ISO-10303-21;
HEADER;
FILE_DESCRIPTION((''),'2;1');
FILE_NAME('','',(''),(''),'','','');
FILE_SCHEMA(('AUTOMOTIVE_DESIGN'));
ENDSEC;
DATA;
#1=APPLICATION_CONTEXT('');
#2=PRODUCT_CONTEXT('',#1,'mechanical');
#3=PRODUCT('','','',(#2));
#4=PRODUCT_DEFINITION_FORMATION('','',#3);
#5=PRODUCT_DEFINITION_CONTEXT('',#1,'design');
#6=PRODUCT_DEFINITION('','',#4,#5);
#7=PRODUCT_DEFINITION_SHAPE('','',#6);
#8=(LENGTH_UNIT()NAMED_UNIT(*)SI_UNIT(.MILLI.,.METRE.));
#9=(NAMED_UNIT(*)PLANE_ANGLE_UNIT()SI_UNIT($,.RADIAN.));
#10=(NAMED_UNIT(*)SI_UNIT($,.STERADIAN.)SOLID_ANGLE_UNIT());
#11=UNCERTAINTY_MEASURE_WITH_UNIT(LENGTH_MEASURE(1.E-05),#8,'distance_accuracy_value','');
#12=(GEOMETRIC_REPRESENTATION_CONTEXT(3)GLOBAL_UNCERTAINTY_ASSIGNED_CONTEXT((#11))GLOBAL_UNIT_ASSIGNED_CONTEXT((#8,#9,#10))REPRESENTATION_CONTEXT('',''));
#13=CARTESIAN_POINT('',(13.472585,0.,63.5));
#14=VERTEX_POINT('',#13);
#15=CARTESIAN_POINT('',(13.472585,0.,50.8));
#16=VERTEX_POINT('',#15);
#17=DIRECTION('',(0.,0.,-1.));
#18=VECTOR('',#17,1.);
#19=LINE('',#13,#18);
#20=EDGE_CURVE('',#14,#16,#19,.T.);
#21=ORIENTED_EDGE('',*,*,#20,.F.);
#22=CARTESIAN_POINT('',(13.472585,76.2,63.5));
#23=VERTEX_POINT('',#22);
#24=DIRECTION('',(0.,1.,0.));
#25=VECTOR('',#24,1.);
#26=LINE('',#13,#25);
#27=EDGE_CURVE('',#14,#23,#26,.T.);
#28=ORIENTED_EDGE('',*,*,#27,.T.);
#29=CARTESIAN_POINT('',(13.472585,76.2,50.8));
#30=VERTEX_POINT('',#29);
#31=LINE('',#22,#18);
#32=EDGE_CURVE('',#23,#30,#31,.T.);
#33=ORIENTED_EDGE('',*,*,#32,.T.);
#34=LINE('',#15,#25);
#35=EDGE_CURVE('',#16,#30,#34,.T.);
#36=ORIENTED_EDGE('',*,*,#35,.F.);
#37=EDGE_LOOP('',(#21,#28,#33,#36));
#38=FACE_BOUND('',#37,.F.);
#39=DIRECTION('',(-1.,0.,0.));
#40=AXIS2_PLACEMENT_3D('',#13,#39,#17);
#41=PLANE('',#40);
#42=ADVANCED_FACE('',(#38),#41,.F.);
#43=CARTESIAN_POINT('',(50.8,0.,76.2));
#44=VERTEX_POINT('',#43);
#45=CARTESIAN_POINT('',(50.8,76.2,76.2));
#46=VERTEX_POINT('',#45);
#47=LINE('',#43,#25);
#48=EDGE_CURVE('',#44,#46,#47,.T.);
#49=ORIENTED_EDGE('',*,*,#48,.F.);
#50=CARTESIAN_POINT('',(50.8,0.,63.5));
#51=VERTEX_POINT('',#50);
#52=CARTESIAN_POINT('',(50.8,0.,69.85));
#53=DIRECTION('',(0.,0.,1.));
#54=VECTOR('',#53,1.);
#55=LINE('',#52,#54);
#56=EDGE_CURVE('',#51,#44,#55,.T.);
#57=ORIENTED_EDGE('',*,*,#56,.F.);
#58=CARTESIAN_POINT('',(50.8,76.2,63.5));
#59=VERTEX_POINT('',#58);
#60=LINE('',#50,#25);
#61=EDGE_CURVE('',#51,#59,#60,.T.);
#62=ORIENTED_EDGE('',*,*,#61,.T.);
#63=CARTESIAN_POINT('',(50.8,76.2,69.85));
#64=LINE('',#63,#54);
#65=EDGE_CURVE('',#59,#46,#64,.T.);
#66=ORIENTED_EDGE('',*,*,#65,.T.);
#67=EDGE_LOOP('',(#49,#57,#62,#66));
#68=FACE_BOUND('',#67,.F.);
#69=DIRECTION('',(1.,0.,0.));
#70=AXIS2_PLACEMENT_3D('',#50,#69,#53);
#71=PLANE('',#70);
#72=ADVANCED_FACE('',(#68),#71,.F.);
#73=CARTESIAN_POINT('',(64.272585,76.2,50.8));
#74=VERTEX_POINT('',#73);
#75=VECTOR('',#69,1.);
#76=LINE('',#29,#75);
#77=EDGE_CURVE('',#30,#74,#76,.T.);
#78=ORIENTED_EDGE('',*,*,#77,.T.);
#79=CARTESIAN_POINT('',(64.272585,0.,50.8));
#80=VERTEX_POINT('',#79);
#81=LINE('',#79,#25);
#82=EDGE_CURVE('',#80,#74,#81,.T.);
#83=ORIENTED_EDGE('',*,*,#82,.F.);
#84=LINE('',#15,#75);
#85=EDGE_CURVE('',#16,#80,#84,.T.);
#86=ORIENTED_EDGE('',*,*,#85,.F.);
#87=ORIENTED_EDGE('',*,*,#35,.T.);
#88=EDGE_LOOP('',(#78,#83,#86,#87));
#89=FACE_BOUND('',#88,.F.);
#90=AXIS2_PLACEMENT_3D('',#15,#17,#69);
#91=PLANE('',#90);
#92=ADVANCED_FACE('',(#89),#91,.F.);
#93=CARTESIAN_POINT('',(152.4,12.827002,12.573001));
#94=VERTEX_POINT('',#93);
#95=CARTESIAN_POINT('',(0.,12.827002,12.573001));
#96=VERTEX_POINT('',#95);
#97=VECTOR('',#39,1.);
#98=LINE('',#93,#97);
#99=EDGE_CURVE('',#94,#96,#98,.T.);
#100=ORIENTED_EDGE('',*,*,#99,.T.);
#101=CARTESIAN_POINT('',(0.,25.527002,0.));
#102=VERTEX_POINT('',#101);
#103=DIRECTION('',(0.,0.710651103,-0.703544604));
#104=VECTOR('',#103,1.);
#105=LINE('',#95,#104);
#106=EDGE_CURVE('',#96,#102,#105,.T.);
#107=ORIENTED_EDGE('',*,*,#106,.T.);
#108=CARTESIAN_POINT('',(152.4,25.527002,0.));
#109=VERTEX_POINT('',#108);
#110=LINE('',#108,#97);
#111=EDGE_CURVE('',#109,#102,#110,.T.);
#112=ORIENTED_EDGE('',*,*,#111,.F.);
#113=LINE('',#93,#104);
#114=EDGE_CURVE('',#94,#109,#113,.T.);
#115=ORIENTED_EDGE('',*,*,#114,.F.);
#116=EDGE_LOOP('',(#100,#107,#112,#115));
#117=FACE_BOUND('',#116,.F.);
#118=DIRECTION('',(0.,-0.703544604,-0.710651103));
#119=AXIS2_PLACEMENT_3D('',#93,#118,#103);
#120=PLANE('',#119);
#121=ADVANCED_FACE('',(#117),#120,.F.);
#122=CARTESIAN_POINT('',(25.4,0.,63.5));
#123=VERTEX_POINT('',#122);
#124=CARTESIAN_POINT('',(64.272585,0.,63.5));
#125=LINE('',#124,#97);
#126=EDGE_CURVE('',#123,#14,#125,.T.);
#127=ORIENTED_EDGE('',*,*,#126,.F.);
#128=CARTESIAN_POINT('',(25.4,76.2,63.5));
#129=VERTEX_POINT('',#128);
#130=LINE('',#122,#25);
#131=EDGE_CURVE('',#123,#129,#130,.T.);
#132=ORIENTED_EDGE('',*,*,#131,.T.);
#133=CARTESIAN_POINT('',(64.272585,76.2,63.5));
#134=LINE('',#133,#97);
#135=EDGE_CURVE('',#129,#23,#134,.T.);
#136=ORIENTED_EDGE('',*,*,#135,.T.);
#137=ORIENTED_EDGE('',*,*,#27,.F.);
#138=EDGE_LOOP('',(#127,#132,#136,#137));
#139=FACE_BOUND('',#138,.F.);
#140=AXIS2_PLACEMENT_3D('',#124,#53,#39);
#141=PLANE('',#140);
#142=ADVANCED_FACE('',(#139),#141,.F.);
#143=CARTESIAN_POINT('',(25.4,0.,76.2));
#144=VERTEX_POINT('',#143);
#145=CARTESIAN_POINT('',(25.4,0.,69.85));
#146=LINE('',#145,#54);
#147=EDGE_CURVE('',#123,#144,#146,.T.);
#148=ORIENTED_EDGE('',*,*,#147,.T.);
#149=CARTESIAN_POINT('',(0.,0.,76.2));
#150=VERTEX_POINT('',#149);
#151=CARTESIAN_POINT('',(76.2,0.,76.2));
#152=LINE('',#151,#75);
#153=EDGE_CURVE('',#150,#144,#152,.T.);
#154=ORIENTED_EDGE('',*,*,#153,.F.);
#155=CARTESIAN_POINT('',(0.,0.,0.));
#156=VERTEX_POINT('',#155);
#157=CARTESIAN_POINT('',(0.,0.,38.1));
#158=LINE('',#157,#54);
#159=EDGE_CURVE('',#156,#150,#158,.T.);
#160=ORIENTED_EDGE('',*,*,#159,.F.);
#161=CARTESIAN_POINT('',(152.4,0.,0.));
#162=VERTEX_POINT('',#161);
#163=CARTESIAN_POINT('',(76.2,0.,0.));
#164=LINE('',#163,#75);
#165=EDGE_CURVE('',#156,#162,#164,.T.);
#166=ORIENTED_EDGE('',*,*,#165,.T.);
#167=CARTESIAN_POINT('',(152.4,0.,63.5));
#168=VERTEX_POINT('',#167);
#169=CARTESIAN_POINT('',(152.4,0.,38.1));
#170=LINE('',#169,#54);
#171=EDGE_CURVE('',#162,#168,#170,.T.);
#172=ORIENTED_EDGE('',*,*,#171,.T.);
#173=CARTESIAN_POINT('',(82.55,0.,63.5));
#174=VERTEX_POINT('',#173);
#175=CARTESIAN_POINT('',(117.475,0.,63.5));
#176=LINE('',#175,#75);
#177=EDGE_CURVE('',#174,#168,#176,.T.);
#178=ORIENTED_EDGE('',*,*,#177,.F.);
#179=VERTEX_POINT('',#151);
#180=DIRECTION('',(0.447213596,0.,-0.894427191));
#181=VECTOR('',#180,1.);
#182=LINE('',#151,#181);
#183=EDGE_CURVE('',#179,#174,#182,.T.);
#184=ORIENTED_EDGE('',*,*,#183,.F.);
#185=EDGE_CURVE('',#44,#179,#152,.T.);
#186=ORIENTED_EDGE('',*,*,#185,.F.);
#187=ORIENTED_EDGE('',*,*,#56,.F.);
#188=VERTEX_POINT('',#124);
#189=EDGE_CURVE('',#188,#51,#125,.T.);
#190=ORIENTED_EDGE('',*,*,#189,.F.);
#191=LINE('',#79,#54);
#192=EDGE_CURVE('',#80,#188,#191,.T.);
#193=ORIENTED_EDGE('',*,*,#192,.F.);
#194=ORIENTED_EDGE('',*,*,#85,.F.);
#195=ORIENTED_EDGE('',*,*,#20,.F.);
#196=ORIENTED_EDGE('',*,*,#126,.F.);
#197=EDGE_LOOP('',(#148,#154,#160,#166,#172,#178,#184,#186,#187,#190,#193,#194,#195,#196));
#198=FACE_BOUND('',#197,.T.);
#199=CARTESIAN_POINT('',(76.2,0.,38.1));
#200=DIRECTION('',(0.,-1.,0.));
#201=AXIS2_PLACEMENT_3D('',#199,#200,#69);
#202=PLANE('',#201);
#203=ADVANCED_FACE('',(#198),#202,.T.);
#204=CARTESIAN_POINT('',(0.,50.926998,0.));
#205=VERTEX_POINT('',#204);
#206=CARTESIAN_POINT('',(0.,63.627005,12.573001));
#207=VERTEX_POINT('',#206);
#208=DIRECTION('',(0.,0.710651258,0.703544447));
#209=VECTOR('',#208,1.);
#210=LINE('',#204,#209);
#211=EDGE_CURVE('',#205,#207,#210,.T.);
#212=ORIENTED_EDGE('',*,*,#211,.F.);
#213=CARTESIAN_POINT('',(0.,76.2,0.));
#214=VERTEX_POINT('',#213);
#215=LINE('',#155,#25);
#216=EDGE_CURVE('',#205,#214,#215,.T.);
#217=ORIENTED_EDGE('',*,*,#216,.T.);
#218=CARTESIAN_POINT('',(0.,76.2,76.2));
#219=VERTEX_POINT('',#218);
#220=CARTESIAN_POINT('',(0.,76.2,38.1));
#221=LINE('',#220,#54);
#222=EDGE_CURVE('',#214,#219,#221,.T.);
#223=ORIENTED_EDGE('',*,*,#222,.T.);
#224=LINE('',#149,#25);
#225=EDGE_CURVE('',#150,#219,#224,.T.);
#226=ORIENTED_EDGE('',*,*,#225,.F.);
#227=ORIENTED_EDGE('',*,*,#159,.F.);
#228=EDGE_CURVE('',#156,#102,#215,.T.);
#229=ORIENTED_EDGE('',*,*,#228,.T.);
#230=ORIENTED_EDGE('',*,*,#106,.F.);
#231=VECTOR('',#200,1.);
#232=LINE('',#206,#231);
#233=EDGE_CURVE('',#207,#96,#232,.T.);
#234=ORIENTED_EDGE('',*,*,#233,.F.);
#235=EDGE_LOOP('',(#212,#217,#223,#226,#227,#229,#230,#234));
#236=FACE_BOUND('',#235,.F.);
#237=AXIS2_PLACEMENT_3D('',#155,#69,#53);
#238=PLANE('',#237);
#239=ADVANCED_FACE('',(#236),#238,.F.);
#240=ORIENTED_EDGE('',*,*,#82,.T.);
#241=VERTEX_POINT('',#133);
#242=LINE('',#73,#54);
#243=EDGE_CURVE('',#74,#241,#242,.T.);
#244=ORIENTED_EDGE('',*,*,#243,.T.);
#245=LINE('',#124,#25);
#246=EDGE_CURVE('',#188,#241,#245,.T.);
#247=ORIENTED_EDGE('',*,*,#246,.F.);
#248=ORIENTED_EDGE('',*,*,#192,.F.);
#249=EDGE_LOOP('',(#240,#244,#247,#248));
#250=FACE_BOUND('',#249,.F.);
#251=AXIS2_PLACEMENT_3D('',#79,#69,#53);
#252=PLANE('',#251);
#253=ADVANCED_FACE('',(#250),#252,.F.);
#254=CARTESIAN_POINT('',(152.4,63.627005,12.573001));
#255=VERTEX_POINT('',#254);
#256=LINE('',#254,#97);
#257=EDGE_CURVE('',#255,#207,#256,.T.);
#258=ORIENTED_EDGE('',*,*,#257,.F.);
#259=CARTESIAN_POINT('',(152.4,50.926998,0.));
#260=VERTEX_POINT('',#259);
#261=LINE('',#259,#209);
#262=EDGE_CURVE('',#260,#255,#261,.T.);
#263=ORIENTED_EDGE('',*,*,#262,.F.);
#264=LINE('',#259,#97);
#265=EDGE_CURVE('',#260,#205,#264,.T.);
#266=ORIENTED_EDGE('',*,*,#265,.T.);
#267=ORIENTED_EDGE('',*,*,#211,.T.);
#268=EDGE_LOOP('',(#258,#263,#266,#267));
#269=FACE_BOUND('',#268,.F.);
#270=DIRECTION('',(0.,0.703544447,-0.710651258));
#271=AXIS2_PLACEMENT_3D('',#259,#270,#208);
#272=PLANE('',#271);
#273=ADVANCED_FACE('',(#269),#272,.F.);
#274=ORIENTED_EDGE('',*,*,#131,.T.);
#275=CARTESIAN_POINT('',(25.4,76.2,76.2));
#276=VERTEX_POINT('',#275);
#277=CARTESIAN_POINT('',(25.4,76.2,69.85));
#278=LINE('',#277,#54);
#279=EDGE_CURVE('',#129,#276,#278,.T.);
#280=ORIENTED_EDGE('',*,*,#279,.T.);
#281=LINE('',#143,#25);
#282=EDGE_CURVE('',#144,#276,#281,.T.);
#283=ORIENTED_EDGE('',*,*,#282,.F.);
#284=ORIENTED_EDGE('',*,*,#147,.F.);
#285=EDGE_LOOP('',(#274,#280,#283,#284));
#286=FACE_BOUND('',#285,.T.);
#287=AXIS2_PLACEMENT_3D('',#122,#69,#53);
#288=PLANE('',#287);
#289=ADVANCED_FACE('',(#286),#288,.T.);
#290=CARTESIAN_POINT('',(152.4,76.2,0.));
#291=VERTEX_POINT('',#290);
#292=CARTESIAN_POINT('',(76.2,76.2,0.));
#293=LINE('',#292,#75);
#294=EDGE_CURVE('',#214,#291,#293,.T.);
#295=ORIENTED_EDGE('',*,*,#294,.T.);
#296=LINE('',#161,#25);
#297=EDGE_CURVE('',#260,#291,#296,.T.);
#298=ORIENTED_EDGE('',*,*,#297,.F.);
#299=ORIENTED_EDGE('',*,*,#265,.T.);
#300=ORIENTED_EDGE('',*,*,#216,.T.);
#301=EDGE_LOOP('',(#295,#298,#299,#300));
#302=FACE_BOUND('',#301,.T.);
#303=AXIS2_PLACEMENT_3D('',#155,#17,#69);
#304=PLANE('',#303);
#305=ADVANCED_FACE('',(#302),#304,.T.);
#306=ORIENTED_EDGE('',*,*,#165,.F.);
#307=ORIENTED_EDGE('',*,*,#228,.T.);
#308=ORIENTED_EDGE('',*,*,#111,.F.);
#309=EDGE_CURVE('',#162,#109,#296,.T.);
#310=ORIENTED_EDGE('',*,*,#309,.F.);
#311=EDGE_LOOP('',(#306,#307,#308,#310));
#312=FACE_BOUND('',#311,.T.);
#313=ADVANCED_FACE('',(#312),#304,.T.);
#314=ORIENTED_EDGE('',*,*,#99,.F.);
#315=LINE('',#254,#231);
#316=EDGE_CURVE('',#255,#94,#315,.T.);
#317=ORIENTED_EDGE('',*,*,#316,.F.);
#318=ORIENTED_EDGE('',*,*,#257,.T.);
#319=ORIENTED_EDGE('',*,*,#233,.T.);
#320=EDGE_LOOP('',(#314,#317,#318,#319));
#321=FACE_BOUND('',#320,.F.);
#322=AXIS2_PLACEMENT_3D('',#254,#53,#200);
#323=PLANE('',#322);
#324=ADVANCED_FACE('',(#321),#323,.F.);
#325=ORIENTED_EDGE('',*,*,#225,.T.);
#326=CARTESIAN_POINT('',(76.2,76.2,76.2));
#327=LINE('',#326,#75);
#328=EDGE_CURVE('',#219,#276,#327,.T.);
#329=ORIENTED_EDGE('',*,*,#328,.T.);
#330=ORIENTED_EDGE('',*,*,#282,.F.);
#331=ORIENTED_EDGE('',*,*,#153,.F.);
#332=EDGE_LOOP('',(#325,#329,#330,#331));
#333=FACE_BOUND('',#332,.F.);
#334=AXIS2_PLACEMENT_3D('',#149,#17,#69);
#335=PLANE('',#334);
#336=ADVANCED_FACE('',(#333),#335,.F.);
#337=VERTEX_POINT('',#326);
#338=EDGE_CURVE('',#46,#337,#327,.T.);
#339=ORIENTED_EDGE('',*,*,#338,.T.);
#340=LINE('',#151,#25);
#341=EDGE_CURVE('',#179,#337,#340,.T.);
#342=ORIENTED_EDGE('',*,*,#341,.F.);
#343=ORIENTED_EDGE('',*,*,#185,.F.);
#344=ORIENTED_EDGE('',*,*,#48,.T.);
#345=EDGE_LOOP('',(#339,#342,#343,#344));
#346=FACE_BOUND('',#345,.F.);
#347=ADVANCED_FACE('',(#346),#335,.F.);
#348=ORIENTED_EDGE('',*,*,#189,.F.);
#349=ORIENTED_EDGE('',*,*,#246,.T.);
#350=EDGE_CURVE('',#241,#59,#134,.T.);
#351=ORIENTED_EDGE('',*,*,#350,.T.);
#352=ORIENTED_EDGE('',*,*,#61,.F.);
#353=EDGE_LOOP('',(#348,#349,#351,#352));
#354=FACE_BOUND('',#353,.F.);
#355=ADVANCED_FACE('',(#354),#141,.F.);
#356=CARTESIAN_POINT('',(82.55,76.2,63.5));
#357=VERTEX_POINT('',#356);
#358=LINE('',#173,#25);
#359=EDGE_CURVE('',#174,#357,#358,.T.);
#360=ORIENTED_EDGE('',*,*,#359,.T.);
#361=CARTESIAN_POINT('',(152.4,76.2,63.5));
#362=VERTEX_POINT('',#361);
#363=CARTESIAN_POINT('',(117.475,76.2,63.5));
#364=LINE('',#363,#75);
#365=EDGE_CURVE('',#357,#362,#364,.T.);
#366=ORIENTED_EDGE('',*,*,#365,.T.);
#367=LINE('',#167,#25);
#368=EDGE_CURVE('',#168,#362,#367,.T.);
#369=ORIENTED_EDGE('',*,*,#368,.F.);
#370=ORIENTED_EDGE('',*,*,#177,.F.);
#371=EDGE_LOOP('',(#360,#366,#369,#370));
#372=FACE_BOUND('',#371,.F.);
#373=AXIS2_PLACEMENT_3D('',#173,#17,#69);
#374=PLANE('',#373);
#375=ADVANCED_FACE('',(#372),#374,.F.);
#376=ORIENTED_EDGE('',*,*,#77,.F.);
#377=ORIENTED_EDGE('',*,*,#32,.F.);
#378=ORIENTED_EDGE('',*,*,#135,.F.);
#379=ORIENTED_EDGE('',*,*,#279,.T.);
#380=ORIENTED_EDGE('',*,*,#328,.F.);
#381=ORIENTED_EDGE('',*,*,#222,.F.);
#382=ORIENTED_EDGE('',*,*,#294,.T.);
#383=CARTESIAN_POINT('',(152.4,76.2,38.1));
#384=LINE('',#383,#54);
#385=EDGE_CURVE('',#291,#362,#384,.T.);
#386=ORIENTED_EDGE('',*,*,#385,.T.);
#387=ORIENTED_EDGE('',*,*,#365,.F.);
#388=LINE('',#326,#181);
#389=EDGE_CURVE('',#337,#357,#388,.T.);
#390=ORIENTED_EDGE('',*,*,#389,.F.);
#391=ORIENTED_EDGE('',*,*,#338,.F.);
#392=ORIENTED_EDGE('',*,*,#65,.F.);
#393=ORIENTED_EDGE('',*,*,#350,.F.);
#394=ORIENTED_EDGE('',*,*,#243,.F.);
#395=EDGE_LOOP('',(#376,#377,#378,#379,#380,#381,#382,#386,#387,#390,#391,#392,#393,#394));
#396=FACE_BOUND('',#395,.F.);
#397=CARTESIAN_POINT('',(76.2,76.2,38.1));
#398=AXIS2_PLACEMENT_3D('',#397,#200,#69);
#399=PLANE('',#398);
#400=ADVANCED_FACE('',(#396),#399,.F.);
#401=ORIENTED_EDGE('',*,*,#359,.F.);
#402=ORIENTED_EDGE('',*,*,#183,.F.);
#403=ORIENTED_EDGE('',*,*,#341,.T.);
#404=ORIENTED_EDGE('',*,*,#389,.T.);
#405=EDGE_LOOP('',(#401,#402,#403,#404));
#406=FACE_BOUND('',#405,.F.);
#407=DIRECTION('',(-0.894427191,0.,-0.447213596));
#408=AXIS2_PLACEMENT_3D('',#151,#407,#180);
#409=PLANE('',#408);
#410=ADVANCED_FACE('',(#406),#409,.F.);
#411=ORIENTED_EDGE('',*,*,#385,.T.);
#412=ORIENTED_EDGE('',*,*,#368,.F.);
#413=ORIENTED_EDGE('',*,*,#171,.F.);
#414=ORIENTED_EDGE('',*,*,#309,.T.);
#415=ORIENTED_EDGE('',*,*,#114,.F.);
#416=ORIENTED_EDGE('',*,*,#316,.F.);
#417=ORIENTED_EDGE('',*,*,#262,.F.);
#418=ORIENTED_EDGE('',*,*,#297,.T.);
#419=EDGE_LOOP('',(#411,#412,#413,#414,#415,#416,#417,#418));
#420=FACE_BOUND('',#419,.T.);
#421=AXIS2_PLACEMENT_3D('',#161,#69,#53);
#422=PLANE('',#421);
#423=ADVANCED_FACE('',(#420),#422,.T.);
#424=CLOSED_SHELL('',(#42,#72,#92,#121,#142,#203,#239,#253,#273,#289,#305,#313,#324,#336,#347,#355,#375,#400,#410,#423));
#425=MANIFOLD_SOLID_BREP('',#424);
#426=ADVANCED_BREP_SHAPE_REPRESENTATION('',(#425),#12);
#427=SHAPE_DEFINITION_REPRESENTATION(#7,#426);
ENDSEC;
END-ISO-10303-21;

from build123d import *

# Parameters (mm, degrees)
F0_W      = 152.4
F0_H      = 76.2
F1_DEPTH  = 76.2
F3_DEPTH  = 152.4
F4_W      = 69.85
F4_H      = 12.7
F5_DEPTH  = 76.2
F7_DEPTH  = 76.2
F8_W      = 25.4
F8_H      = 12.7
F9_DEPTH  = 76.2
F11_DEPTH = 76.2


# Not quite as in the source:
# - a feature names something its author has since deleted; it is built from what else it names


with BuildPart() as f1:
    # F0 (on Front) → F1 (new body)
    with BuildSketch(Plane.XZ):
        with Locations((76.2, 38.1)):
            Rectangle(F0_W, F0_H)
    extrude(amount=-F1_DEPTH)

    # F2 (on face) → F3 (cut)
    with BuildSketch(Plane.YZ.offset(152.4)):
        Polygon((25.5270022899, 0), (38.1, 0), (50.9269982576, 0), (63.6270046234, 12.573000975), (12.8270015121, 12.573000975), align=None)
    extrude(amount=-F3_DEPTH, mode=Mode.SUBTRACT)

    # F4 (on face) → F5 (cut)
    with BuildSketch(Plane.XZ):
        with Locations((117.475, 69.85)):
            Rectangle(F4_W, F4_H)
    extrude(amount=-F5_DEPTH, mode=Mode.SUBTRACT)

    # F6 (on face) → F7 (cut)
    with BuildSketch(Plane.XZ):
        Polygon((76.2, 76.2), (82.55, 63.5), (82.55, 76.2), align=None)
    extrude(amount=-F7_DEPTH, mode=Mode.SUBTRACT)

    # F8 (on face) → F9 (cut)
    with BuildSketch(Plane.XZ):
        with Locations((38.1, 69.85)):
            Rectangle(F8_W, F8_H)
    extrude(amount=-F9_DEPTH, mode=Mode.SUBTRACT)

    # F10 (on face) → F11 (cut)
    with BuildSketch(Plane.XZ):
        Polygon((64.2725850075, 63.5), (38.1, 63.5), (13.4725850075, 63.5), (13.4725850075, 50.8), (64.2725850075, 50.8), align=None)
    extrude(amount=-F11_DEPTH, mode=Mode.SUBTRACT)


solid = f1.part
